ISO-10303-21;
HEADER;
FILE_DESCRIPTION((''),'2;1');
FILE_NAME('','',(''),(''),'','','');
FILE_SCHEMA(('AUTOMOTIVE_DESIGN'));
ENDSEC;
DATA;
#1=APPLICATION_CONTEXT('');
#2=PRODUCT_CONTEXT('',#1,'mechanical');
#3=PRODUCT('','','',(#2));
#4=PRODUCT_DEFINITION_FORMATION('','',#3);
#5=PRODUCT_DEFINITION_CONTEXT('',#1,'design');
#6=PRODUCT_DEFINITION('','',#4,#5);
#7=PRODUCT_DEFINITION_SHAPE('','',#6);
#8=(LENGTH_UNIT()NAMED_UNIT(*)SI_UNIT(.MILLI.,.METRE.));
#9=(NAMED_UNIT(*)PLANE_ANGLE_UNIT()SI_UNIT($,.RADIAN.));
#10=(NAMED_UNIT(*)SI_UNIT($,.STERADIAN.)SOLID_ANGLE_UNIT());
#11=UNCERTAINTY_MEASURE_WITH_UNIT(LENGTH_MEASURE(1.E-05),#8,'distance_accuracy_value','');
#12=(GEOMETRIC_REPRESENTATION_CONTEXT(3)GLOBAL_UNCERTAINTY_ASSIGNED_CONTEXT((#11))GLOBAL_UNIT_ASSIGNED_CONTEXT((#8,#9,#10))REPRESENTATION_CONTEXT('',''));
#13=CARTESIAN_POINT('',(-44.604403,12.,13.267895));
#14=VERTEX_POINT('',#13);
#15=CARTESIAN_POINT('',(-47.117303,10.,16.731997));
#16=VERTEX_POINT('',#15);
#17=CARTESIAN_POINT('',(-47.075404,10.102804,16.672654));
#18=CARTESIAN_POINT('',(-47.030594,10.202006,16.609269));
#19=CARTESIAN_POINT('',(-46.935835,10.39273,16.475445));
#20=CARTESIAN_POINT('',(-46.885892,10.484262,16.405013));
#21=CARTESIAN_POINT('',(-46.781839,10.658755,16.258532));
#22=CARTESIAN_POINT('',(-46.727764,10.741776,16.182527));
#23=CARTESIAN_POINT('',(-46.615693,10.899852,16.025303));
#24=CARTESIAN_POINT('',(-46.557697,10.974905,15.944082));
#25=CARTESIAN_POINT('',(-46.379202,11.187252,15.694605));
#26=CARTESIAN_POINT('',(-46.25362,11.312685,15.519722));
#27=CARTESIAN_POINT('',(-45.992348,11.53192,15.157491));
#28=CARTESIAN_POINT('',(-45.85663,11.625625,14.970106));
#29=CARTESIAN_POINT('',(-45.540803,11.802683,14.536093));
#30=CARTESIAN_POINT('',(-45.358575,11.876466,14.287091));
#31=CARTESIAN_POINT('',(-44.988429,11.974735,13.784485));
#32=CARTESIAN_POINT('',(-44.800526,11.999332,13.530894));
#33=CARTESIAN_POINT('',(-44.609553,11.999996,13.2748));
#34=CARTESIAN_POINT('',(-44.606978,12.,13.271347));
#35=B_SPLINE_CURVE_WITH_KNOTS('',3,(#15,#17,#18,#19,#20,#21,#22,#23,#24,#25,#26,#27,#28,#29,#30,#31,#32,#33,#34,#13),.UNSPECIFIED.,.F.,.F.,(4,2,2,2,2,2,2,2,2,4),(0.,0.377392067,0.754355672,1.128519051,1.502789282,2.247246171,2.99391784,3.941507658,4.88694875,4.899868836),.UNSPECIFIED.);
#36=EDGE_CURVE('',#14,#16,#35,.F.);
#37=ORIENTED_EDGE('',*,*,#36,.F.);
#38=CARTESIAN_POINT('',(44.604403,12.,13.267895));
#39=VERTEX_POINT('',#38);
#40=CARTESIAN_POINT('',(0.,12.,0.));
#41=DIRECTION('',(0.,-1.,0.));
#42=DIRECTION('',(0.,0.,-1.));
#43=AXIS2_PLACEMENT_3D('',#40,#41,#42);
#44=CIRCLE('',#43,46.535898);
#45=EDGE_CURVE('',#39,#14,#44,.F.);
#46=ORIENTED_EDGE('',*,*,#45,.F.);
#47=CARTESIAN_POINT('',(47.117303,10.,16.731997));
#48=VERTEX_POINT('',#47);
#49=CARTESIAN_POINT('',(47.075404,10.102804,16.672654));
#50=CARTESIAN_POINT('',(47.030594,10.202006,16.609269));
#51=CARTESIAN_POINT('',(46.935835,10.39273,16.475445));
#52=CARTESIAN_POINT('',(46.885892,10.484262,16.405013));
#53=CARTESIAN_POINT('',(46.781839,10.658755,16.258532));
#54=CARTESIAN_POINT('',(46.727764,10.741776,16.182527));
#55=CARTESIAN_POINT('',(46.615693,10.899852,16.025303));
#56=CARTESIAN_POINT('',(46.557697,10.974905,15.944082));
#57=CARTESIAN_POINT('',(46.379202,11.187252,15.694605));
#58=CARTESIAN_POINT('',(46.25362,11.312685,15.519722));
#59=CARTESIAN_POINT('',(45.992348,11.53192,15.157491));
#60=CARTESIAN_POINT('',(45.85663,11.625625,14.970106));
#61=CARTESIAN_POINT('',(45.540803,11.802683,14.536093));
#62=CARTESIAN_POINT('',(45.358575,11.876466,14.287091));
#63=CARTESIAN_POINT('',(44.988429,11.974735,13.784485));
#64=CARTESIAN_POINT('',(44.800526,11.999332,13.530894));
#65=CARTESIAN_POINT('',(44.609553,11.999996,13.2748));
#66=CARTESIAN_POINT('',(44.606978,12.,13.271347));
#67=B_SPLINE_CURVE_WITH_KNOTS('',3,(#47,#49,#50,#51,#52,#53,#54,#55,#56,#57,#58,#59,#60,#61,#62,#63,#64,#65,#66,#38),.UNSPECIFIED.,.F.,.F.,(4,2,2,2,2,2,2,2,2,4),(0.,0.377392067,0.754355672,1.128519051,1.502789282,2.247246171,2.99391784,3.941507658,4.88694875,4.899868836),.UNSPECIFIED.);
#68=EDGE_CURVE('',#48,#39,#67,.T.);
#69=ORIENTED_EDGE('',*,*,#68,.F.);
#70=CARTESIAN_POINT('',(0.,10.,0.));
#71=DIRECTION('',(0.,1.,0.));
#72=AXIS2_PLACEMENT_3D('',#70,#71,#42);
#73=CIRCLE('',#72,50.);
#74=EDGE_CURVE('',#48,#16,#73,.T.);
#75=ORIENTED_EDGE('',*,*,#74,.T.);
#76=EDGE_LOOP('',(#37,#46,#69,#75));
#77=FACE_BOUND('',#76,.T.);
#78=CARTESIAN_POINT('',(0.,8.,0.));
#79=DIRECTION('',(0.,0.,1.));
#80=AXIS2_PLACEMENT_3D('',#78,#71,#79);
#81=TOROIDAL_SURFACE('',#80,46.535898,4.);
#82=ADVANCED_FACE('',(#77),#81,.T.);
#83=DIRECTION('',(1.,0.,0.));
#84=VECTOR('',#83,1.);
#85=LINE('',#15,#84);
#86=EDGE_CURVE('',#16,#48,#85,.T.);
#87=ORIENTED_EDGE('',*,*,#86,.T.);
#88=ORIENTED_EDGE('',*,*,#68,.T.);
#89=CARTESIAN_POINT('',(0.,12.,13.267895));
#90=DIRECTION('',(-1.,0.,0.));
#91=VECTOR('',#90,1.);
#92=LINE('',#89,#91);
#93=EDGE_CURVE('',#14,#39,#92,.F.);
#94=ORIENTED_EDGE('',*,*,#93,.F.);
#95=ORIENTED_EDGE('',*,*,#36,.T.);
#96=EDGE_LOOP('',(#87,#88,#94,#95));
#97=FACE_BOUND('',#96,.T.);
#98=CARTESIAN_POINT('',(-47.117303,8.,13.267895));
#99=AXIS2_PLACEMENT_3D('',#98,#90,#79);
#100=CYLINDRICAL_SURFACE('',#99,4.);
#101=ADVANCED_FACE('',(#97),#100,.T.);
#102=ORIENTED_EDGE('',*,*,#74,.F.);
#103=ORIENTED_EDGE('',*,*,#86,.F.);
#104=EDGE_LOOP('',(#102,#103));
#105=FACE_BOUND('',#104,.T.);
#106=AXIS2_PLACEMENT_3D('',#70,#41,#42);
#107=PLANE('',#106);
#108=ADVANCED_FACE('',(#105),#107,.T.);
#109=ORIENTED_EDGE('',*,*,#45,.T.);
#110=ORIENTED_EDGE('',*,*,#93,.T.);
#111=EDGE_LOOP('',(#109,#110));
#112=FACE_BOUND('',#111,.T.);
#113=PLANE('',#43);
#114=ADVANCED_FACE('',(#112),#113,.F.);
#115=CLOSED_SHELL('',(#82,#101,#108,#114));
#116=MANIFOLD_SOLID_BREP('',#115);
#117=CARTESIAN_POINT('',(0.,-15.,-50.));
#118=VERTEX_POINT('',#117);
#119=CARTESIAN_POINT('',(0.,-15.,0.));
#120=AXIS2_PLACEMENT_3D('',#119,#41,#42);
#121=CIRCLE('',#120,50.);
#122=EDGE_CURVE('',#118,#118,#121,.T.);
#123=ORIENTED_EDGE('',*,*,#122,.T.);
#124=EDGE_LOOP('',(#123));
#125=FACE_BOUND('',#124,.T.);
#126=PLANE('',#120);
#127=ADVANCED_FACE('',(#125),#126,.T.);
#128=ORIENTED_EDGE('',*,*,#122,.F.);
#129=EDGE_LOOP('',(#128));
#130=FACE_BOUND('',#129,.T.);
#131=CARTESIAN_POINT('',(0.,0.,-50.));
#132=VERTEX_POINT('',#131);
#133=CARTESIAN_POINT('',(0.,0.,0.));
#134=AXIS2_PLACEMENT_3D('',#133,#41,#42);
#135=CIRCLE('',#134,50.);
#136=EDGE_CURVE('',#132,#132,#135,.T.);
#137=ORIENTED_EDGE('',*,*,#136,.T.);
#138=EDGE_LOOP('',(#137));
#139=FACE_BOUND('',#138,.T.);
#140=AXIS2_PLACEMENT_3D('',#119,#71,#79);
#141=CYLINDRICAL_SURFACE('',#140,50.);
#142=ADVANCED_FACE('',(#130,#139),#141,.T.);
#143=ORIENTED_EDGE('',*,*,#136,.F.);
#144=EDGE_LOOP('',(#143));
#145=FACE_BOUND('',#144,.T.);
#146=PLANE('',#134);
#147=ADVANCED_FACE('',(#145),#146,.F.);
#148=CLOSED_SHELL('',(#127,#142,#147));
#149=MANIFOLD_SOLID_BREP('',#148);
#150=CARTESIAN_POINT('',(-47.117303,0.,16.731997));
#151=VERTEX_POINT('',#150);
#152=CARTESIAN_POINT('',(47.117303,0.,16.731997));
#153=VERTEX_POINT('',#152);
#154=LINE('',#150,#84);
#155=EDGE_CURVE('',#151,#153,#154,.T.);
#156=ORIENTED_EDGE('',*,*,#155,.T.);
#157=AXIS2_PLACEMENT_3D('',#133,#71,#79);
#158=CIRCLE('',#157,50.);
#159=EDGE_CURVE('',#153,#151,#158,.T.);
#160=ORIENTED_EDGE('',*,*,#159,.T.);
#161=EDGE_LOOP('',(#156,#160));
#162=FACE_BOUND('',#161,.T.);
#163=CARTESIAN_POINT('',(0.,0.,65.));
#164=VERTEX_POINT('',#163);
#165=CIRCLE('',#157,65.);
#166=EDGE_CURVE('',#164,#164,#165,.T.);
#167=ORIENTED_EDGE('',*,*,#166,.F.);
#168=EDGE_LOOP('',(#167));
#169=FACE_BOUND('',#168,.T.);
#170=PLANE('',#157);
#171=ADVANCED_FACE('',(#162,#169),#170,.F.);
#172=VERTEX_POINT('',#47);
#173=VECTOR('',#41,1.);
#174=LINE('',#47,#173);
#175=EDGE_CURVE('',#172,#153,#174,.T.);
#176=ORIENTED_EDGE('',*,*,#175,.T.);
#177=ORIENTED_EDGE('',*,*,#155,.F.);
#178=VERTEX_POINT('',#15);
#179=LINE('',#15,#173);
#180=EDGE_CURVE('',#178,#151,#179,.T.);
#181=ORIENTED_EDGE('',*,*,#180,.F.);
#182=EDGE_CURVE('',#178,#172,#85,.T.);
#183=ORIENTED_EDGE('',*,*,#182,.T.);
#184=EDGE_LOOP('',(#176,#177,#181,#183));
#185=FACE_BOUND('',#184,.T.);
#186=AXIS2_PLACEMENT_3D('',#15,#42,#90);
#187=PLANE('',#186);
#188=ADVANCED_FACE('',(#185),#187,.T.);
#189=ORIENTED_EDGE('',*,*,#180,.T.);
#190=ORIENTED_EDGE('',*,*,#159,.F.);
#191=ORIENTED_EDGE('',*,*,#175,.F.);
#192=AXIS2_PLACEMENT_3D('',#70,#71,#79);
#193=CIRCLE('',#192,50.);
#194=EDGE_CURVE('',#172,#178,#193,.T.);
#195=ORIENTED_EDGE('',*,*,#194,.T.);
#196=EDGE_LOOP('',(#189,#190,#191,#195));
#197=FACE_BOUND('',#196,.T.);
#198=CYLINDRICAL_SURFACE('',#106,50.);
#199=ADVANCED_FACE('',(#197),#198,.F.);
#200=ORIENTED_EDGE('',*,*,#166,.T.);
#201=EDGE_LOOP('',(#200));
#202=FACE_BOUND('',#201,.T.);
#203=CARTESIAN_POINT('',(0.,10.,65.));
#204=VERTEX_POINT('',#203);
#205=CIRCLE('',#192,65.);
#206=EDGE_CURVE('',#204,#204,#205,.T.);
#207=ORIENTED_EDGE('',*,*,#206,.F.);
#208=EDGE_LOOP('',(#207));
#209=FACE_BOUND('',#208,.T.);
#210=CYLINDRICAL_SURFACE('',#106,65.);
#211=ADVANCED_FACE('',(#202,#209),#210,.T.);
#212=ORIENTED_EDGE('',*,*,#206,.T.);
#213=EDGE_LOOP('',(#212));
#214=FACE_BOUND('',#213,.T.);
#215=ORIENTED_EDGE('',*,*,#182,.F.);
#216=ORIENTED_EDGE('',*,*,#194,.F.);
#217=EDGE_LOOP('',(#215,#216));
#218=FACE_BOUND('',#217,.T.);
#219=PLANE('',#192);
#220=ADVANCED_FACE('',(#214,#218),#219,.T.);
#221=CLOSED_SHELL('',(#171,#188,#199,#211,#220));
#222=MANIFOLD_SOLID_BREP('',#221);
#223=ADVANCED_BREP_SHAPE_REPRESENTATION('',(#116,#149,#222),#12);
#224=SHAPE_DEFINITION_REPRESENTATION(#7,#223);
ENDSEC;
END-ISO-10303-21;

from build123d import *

# Parameters (mm, degrees)
SKETCH1_R           = 65
BOSS_EXTRUDE1_DEPTH = 10
BOSS_EXTRUDE2_DEPTH = 2
FILLET1_R           = 4
SKETCH3_R           = 50
BOSS_EXTRUDE8_DEPTH = 15


with BuildPart() as part:
    # Sketch1 → Boss-Extrude1 (new body)
    with BuildSketch(Plane(origin=(0, 0, 0), x_dir=(1, 0, 0), z_dir=(0, 1, 0))):
        with Locations(Location((0, 0, 0), (0, 0, 270))):
            Circle(SKETCH1_R)
        with BuildLine():
            Line((-47.117303386, -16.731996941), (47.117303386, -16.731996941))
            ThreePointArc((47.117303386, -16.731996941), (0, 50), (-47.117303386, -16.731996941))
        make_face(mode=Mode.SUBTRACT)
    extrude(amount=BOSS_EXTRUDE1_DEPTH)


with BuildPart() as body_2:
    # Sketch2 → Boss-Extrude2 (new body)
    with BuildSketch(Plane(origin=(0, 10, 0), x_dir=(1, 0, 0), z_dir=(0, 1, 0))):
        with BuildLine():
            Line((-47.117303386, -16.731996941), (47.117303386, -16.731996941))
            ThreePointArc((47.117303386, -16.731996941), (0, 50), (-47.117303386, -16.731996941))
        make_face()
    extrude(amount=BOSS_EXTRUDE2_DEPTH)

    # Fillet1
    # the kernel refuses this fillet: 4 mm, written as the material it takes off along each edge
    with BuildSketch(Plane(origin=(-55.777557424, 12, 16.731996941), x_dir=(0, -1, 0), z_dir=(1, 0, 0))) as fillet1_piece_1:
        with BuildLine():
            CenterArc((4, 3.464101615), FILLET1_R, 180, 60)
            Line((0, 3.464101615), (-0.08, 3.464101615))
            Line((-0.08, 3.464101615), (-0.08, 0))
            Line((-0.08, 0), (0, -0.08))
            ThreePointArc((0, -0.08), (1, -0.08), (1.96, -0.069282032))
            Line((1.96, -0.069282032), (2, 0))
        make_face()
    extrude(amount=111.555114848, mode=Mode.SUBTRACT)
    with BuildSketch(Plane(origin=(0, 12, 0), x_dir=(0.8703709621505415, 0, 0.49239657619152943), z_dir=(-0.49239657619152943, 0, 0.8703709621505415))) as fillet1_piece_2:
        with BuildLine():
            CenterArc((46.535898385, -4), FILLET1_R, 30, 60)
            Line((46.535898385, 0), (46.535898385, 0.08))
            Line((46.535898385, 0.08), (50, 0.08))
            Line((50, 0.08), (50.08, 0))
            ThreePointArc((50.08, 0), (50.08, -1), (50.069282032, -1.96))
            Line((50.069282032, -1.96), (50, -2))
        make_face()
    revolve(axis=Axis((0, 12, 0), (0, 1, 0)), revolution_arc=238.996447313, mode=Mode.SUBTRACT)


with BuildPart() as body_3:
    # Sketch3 → Boss-Extrude8 (new body)
    with BuildSketch(Plane.XZ):
        with Locations(Location((0, 0, 0), (0, 0, 270))):
            Circle(SKETCH3_R)
    extrude(amount=BOSS_EXTRUDE8_DEPTH)


solid = Compound([part.part, body_2.part, body_3.part])
